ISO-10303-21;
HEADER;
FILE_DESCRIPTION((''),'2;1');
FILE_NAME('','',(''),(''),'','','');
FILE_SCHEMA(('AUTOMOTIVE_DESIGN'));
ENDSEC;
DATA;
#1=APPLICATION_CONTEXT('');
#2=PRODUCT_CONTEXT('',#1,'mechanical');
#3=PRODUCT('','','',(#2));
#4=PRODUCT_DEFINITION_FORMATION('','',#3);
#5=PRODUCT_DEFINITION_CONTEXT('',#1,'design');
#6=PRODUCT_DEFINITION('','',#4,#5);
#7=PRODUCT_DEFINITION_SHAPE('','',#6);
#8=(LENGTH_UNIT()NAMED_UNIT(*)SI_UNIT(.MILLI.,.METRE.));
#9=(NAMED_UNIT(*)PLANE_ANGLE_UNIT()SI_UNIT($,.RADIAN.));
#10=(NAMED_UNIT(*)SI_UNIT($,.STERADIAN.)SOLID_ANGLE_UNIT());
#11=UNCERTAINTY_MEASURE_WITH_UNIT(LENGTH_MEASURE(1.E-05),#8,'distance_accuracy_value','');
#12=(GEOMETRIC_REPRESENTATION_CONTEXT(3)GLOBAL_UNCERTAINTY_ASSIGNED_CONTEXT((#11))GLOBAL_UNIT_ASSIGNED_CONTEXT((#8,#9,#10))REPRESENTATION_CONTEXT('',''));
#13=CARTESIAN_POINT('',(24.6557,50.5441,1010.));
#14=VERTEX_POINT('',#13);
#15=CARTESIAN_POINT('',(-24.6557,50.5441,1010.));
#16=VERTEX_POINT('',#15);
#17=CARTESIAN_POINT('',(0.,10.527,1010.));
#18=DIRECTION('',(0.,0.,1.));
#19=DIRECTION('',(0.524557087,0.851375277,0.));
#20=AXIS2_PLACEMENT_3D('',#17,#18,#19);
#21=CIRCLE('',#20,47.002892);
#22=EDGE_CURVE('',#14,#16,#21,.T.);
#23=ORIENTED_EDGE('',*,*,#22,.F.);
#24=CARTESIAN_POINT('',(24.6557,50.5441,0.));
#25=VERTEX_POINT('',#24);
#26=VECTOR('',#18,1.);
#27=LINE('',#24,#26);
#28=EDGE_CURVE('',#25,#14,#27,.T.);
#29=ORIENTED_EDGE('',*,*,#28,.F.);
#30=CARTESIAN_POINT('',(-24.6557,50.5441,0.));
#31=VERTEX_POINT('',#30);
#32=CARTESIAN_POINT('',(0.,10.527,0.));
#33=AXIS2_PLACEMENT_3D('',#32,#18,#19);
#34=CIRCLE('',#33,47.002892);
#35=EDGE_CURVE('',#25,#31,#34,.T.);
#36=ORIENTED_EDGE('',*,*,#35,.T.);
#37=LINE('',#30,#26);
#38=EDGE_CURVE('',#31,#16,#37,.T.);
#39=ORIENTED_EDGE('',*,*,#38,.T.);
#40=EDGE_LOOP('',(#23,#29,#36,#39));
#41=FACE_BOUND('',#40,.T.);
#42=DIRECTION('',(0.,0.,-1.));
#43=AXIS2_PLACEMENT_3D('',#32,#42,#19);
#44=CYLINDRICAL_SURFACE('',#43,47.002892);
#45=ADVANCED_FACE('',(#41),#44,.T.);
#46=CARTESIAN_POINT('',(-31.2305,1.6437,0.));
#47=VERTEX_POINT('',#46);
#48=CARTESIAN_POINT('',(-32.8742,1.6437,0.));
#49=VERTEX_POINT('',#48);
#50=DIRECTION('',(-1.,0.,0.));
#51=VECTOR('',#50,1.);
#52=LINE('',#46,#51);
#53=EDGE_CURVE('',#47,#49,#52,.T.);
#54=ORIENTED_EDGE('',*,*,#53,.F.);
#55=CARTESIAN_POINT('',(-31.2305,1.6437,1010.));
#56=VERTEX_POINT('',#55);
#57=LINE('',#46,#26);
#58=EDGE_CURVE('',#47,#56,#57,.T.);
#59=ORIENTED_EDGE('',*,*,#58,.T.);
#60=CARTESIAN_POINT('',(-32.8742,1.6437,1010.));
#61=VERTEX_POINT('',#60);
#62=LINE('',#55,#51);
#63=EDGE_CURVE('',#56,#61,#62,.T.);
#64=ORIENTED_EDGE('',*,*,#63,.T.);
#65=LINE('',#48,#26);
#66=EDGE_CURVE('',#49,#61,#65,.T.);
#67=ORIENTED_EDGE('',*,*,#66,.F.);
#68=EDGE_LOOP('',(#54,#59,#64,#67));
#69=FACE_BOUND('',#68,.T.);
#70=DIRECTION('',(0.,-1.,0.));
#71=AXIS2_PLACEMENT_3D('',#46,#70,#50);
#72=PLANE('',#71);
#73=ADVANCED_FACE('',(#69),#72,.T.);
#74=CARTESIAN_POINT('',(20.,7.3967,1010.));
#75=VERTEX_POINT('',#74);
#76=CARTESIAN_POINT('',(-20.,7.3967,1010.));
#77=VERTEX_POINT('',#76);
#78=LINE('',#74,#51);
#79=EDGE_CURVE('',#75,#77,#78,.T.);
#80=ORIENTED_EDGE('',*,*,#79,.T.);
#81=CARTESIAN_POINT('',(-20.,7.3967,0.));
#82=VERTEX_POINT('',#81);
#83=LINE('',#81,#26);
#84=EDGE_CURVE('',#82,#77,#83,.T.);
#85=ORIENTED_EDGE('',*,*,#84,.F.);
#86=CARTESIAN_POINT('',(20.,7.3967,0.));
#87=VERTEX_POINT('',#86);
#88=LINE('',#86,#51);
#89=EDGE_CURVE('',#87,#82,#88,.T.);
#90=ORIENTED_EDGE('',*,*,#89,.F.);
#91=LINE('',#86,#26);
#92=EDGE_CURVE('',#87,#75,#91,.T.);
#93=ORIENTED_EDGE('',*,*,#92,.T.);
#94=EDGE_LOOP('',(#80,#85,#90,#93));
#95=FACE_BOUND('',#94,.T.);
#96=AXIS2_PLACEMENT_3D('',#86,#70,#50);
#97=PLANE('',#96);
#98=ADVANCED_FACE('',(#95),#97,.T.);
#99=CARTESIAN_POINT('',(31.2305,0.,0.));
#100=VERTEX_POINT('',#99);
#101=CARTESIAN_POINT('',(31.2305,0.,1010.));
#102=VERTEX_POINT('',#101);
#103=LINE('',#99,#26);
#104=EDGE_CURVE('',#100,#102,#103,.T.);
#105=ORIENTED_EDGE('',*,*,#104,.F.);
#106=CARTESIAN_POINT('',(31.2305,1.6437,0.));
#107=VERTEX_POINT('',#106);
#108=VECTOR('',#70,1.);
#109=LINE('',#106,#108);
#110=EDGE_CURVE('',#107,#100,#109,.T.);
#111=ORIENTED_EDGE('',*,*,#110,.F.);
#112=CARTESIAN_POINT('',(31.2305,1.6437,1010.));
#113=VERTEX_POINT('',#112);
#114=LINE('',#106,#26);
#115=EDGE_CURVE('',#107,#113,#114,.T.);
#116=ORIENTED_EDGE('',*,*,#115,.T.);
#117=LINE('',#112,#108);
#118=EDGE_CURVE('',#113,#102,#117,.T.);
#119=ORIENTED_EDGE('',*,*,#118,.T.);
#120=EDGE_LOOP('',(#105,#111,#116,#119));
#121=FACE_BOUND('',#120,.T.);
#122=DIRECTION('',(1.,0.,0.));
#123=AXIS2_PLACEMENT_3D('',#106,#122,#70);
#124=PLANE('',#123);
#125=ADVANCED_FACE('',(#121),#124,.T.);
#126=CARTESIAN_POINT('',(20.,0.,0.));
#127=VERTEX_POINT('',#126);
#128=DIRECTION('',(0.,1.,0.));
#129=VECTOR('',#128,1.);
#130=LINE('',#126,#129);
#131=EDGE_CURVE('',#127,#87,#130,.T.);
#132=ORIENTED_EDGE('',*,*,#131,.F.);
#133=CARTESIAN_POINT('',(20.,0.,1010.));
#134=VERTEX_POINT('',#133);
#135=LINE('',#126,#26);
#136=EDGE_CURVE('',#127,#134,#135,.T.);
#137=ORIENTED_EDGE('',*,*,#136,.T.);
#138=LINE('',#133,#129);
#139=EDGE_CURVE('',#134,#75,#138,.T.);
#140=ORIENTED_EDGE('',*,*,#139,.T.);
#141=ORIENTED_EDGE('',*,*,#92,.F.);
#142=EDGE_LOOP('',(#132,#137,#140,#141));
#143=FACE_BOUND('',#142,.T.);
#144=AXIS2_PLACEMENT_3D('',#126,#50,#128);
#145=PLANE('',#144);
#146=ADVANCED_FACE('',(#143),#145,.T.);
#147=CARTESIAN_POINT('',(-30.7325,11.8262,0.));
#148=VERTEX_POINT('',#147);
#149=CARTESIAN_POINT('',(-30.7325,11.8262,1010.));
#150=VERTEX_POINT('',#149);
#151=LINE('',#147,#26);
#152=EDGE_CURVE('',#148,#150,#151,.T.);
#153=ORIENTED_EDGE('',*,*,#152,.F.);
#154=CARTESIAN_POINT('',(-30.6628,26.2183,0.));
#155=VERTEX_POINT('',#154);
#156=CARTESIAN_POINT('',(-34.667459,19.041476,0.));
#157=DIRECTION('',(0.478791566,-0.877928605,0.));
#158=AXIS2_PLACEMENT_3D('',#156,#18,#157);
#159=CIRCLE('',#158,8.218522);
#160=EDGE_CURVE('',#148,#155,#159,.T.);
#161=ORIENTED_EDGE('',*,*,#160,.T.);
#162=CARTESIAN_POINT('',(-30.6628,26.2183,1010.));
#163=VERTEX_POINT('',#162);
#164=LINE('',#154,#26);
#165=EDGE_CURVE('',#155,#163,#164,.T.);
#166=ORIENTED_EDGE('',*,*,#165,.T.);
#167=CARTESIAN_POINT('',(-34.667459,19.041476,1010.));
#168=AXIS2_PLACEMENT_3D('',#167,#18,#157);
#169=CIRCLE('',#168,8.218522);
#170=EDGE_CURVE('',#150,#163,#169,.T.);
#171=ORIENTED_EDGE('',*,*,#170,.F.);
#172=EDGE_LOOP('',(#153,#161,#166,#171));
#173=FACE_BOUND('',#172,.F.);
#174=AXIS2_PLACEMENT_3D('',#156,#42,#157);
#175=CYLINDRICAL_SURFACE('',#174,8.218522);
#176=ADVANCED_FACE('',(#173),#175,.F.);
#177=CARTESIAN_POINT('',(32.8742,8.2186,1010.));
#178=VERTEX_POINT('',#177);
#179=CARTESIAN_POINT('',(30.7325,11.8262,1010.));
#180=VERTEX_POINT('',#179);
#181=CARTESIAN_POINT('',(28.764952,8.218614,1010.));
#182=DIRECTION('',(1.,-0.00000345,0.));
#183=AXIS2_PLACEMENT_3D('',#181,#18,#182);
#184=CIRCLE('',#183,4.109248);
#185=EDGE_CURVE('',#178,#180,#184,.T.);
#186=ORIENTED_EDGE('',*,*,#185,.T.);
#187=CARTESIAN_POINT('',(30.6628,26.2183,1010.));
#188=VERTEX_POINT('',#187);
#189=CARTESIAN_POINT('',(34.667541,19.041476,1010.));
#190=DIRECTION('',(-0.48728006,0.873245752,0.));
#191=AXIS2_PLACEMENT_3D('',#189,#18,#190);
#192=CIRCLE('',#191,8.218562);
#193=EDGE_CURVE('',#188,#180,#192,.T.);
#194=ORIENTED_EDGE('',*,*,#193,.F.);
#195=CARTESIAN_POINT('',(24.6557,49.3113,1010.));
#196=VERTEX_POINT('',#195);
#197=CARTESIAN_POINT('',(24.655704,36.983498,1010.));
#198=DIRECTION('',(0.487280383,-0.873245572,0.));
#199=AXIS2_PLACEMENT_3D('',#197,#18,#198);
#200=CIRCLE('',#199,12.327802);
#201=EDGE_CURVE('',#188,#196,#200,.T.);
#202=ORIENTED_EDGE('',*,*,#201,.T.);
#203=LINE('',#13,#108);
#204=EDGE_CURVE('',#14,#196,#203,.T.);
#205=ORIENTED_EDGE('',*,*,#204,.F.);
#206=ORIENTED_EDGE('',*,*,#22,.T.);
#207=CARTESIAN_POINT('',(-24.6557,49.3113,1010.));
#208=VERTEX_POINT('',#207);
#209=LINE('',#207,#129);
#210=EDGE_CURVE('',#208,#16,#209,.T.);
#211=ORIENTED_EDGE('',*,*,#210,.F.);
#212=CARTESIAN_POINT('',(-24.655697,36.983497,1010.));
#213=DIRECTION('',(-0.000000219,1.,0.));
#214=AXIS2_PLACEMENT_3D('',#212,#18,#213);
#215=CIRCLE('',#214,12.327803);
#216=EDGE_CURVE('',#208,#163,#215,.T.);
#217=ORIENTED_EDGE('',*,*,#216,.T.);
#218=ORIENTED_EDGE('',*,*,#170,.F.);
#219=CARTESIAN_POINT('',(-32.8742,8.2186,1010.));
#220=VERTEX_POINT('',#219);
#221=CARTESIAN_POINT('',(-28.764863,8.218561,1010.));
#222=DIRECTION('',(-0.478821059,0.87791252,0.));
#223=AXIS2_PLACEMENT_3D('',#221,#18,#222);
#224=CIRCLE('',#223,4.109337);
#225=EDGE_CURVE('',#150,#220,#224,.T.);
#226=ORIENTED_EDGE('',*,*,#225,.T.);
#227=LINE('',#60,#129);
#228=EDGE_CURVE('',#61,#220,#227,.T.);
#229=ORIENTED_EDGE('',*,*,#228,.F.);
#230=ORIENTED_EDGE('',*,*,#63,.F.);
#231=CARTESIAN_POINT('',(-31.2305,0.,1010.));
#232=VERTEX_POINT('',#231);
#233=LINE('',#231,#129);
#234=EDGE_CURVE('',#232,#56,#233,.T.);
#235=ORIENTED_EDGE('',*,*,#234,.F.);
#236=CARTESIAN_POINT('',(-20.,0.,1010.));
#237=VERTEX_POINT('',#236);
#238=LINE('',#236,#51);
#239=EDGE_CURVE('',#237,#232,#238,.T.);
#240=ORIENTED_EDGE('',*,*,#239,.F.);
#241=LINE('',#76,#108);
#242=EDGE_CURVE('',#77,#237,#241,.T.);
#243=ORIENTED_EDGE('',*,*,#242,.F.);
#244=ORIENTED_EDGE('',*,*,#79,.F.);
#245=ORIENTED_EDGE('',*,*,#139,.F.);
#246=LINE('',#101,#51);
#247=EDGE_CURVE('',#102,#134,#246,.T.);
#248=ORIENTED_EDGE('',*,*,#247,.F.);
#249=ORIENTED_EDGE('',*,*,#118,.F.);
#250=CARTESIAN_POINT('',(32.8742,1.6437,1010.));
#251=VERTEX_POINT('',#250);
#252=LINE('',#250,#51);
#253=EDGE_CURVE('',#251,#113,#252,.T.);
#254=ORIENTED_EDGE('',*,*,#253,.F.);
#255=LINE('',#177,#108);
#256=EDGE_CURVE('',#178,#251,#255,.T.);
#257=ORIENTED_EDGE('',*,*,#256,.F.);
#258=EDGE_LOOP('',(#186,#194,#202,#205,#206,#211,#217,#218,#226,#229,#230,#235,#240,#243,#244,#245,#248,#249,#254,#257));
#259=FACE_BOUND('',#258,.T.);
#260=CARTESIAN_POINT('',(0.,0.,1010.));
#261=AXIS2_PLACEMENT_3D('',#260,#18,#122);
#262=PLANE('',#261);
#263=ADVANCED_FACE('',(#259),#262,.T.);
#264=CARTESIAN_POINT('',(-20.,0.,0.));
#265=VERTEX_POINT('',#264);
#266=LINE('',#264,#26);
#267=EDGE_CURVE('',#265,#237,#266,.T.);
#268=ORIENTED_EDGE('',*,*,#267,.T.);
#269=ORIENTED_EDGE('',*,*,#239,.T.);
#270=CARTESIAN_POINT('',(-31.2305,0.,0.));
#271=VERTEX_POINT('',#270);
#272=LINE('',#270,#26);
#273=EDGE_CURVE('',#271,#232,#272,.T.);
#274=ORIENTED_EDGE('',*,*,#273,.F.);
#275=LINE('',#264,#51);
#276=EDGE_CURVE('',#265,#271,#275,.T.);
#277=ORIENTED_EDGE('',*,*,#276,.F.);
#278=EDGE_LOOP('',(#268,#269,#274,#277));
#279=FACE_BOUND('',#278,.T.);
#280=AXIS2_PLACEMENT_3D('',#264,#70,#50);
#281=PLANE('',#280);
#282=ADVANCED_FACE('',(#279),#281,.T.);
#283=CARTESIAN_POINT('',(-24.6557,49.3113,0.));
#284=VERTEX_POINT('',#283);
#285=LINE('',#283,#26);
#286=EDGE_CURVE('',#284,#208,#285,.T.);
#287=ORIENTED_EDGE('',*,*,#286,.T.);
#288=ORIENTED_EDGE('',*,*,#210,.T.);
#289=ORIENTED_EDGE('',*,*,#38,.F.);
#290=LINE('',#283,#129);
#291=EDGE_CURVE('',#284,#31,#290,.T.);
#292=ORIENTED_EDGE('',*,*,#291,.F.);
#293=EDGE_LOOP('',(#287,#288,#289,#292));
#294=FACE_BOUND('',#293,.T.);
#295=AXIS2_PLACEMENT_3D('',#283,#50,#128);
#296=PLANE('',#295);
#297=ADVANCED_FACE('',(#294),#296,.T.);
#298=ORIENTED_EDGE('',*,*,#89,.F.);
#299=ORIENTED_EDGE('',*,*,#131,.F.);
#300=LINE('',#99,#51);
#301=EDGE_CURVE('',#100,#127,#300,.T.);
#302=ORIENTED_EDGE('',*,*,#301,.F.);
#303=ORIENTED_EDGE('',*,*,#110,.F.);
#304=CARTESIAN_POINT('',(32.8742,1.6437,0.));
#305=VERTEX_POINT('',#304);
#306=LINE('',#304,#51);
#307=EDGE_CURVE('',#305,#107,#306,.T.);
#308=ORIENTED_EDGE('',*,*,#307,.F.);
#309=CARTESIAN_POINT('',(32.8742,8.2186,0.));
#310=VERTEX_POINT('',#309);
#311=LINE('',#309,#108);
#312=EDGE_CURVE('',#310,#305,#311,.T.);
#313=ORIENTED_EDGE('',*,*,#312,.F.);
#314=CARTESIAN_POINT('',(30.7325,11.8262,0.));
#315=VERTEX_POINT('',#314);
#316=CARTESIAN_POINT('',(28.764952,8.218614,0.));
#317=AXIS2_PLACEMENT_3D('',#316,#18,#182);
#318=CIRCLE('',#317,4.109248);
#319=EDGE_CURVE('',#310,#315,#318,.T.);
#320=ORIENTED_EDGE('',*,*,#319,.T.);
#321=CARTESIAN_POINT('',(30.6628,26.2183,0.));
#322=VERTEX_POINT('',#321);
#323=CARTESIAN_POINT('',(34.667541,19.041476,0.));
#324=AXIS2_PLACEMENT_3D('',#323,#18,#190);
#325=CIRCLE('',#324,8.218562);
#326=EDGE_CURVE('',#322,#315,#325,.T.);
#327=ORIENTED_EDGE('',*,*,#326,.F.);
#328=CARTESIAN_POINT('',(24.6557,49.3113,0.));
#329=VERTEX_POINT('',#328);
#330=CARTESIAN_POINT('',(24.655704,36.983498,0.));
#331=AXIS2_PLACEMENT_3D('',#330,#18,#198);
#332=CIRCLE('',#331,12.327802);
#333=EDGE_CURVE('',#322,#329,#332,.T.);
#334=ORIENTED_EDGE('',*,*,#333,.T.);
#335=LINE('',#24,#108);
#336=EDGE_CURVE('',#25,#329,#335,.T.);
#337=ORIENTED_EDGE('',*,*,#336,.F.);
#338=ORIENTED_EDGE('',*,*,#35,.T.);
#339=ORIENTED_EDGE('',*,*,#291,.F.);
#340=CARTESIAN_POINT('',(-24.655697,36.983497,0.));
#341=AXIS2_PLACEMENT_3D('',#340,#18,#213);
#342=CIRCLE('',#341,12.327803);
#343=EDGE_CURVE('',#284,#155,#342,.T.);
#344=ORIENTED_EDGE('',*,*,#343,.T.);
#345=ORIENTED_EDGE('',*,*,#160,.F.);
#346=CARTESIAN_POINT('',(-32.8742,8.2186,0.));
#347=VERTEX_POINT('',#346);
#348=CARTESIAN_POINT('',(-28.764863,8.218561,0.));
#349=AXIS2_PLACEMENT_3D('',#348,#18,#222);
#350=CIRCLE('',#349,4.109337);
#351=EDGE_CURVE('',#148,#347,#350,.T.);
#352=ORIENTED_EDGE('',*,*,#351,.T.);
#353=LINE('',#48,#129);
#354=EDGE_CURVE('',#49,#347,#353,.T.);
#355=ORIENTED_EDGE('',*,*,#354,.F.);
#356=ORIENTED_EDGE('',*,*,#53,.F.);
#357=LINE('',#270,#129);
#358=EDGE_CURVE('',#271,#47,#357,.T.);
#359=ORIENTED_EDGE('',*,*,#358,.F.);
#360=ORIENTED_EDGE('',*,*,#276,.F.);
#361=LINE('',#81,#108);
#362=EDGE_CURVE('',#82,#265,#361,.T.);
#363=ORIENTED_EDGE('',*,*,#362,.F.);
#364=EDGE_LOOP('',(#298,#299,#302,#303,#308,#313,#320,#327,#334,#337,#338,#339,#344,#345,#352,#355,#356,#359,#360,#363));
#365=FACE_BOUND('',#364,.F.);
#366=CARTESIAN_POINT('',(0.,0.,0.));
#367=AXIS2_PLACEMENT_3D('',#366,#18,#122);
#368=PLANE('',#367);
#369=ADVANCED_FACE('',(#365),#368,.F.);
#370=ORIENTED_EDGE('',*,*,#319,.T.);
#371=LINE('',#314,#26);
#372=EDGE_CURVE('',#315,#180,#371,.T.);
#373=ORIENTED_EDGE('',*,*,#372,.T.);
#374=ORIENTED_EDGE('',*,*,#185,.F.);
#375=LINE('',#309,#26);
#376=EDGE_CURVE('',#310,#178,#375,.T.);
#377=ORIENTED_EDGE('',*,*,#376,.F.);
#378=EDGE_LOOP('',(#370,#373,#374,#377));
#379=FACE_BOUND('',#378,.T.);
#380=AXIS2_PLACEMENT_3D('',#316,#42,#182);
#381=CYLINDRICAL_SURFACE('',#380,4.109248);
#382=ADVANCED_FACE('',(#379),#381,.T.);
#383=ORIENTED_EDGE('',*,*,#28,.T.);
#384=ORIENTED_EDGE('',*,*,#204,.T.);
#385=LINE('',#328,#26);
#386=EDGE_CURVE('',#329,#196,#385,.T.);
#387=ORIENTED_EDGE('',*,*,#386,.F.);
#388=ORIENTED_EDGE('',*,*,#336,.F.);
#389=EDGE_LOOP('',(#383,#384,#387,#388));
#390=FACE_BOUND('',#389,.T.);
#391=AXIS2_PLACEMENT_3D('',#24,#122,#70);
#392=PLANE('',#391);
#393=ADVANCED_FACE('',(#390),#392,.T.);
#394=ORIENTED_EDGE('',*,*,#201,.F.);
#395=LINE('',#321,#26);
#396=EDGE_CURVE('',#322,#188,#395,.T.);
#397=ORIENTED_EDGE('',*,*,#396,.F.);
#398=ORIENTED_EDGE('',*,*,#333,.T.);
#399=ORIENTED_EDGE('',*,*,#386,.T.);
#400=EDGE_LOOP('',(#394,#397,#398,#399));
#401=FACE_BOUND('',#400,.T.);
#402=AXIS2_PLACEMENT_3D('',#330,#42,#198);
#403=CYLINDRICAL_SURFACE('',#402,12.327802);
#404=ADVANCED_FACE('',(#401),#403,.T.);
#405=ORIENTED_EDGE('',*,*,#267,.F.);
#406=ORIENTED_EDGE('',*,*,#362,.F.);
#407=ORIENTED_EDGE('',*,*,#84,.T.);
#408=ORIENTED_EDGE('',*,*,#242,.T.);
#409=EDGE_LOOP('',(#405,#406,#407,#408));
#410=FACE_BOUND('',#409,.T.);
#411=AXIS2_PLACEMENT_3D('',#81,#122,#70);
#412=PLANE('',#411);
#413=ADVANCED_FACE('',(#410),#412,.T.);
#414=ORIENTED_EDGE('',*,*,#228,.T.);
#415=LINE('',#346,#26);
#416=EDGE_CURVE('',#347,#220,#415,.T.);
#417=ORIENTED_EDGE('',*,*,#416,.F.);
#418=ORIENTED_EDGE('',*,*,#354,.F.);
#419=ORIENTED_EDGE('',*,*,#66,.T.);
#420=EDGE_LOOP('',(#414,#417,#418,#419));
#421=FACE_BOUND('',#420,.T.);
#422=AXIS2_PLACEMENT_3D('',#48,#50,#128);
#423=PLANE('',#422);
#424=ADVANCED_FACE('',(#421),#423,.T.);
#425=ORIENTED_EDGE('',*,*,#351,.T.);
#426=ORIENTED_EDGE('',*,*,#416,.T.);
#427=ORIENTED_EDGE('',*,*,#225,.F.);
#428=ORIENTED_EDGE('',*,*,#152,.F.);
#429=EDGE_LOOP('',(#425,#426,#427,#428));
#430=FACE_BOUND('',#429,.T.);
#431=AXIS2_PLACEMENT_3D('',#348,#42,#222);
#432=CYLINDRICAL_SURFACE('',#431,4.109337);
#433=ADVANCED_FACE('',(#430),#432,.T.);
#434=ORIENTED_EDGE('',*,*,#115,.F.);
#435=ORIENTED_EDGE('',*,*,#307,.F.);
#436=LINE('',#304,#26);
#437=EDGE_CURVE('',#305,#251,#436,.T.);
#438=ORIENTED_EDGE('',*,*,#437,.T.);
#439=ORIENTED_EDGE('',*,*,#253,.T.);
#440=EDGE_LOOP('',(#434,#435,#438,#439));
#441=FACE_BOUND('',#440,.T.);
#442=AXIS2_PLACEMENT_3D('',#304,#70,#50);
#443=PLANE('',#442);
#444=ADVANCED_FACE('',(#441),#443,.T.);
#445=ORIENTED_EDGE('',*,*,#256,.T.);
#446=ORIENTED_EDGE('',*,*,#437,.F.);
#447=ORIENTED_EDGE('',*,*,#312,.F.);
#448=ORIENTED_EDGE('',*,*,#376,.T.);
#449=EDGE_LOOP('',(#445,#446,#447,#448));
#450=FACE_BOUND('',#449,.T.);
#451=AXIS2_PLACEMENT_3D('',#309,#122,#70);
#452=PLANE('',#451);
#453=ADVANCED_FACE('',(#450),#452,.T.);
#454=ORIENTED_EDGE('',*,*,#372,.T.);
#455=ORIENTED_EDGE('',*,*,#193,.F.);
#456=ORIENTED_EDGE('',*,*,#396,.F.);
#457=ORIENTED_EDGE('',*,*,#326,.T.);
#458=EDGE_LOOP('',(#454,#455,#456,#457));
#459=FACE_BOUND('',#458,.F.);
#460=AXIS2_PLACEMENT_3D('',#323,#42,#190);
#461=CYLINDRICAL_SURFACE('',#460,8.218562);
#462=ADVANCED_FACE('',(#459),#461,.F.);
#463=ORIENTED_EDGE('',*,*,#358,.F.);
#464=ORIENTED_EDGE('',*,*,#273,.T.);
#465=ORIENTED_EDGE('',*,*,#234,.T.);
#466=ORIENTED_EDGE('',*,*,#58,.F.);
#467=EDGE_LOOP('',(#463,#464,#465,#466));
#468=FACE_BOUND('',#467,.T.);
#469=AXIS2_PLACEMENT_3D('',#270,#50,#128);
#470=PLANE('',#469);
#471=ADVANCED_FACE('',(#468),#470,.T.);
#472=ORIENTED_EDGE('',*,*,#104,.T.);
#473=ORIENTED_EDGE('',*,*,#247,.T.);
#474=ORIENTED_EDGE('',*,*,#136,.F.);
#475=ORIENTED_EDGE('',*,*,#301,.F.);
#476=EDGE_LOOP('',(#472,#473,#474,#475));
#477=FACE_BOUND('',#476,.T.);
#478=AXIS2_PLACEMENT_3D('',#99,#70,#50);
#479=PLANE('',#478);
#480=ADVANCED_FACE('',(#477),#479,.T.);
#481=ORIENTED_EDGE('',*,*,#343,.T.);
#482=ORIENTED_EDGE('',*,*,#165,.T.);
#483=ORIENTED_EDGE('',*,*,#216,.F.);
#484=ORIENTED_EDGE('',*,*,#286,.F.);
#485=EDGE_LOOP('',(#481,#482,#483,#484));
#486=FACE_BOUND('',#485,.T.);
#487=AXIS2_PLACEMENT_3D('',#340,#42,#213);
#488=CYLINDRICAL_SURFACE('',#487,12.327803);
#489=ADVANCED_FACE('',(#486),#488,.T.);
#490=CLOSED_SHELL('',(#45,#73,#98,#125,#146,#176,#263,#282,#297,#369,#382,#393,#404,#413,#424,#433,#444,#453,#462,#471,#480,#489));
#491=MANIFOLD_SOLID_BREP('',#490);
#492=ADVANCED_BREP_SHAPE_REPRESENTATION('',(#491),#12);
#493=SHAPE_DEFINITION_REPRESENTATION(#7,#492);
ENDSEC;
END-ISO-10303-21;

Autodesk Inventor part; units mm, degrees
ref_plane "YZ Plane" through (0, 0, 0) normal (1, 0, 0) x (0, 1, 0)
ref_plane "XZ Plane" through (0, 0, 0) normal (0, 1, 0) x (-1, 0, 0)
sketch "Поручень" plane through (0, 0, 0) normal (0, 0, 1) x (1, 0, 0)
  line L0 (20.3655, -7.6059) -> (20.3655, -0.2092)
  line L1 (20.3655, -0.2092) -> (-19.6345, -0.2092)
  line L2 (-19.6345, -0.2092) -> (-19.6345, -7.6059)
  line L3 (-19.6345, -7.6059) -> (-30.865, -7.6059)
  line L4 (-30.865, -7.6059) -> (-30.865, -5.9622)
  line L5 (-30.865, -5.9622) -> (-32.5087, -5.9622)
  line L6 (-32.5087, -5.9622) -> (-32.5087, 0.6126)
  arc A0 (-30.367, 4.2203) -> (-32.5087, 0.6126) centre (-28.3995, 0.6126) ccw
  arc A1 (-30.367, 4.2203) -> (-30.2973, 18.6123) centre (-34.302, 11.4355) ccw
  arc A2 (-24.2902, 41.7054) -> (-30.2973, 18.6123) centre (-24.2902, 29.3776) ccw
  line L7 (-24.2902, 41.7054) -> (-24.2902, 42.9382)
  arc A3 (25.0211, 42.9382) -> (-24.2902, 42.9382) centre (0.3655, 2.9211) ccw
  line L8 (25.0211, 42.9382) -> (25.0211, 41.7054)
  arc A4 (31.0282, 18.6123) -> (25.0211, 41.7054) centre (25.0211, 29.3776) ccw
  arc A5 (31.0282, 18.6123) -> (31.0979, 4.2203) centre (35.033, 11.4355) ccw
  arc A6 (33.2397, 0.6126) -> (31.0979, 4.2203) centre (29.1304, 0.6126) ccw
  line L9 (33.2397, 0.6126) -> (33.2397, -5.9622)
  line L10 (33.2397, -5.9622) -> (31.596, -5.9622)
  line L11 (31.596, -5.9622) -> (31.596, -7.6059)
  line L12 (31.596, -7.6059) -> (20.3655, -7.6059)
  point P0 (0.3655, -0.2092)
  point P1 (0.3655, -7.6059)
sketch "Эскиз" plane through (0, 0, 0) normal (0, 0, 1) x (1, 0, 0)
  line L0 (20, 0) -> (20, 7.3967)
  line L1 (20, 7.3967) -> (-20, 7.3967)
  line L2 (-20, 7.3967) -> (-20, 0)
  line L3 (-20, 0) -> (-31.2305, 0)
  line L4 (-31.2305, 0) -> (-31.2305, 1.6437)
  line L5 (-31.2305, 1.6437) -> (-32.8742, 1.6437)
  line L6 (-32.8742, 1.6437) -> (-32.8742, 8.2186)
  arc A0 (-30.7325, 11.8262) -> (-32.8742, 8.2186) centre (-28.7649, 8.2186) ccw
  arc A1 (-30.7325, 11.8262) -> (-30.6628, 26.2183) centre (-34.6675, 19.0415) ccw
  arc A2 (-24.6557, 49.3113) -> (-30.6628, 26.2183) centre (-24.6557, 36.9835) ccw
  line L7 (-24.6557, 49.3113) -> (-24.6557, 50.5441)
  arc A3 (24.6557, 50.5441) -> (-24.6557, 50.5441) centre (0, 10.527) ccw
  line L8 (24.6557, 50.5441) -> (24.6557, 49.3113)
  arc A4 (30.6628, 26.2183) -> (24.6557, 49.3113) centre (24.6557, 36.9835) ccw
  arc A5 (30.6628, 26.2183) -> (30.7325, 11.8262) centre (34.6675, 19.0415) ccw
  arc A6 (32.8742, 8.2186) -> (30.7325, 11.8262) centre (28.7649, 8.2186) ccw
  line L9 (32.8742, 8.2186) -> (32.8742, 1.6437)
  line L10 (32.8742, 1.6437) -> (31.2305, 1.6437)
  line L11 (31.2305, 1.6437) -> (31.2305, 0)
  line L12 (31.2305, 0) -> (20, 0)
  point P0 (0, 0)
ref_plane "Начальная плоскость" through (0, 0, 0) normal (0, 0, 1) x (1, 0, 0)
ref_plane "РабПлоскость2" through (0, 0, 1010) normal (0, 0, 1) x (1, 0, 0)
extrude "Тело" add sketch "Эскиз" along normal up to surface (1010 mm away) from surface at 0
ref_plane "Конечная плоскость" through (0, 0, 1010) normal (0, 0, 1) x (1, 0, 0)
equation "\"ШИРИНА\" = 75"
equation "\"ТОЛЩВЫС\" = 58"
equation "\"СЕЧЕНИЕ_СМЕЩ\" = 0"
equation "\"G_OFFSET_END\" = 0"
equation "\"G_OFFSET_START\" = 0"
properties part number "Поручень" material "Древесина (дуб)"
